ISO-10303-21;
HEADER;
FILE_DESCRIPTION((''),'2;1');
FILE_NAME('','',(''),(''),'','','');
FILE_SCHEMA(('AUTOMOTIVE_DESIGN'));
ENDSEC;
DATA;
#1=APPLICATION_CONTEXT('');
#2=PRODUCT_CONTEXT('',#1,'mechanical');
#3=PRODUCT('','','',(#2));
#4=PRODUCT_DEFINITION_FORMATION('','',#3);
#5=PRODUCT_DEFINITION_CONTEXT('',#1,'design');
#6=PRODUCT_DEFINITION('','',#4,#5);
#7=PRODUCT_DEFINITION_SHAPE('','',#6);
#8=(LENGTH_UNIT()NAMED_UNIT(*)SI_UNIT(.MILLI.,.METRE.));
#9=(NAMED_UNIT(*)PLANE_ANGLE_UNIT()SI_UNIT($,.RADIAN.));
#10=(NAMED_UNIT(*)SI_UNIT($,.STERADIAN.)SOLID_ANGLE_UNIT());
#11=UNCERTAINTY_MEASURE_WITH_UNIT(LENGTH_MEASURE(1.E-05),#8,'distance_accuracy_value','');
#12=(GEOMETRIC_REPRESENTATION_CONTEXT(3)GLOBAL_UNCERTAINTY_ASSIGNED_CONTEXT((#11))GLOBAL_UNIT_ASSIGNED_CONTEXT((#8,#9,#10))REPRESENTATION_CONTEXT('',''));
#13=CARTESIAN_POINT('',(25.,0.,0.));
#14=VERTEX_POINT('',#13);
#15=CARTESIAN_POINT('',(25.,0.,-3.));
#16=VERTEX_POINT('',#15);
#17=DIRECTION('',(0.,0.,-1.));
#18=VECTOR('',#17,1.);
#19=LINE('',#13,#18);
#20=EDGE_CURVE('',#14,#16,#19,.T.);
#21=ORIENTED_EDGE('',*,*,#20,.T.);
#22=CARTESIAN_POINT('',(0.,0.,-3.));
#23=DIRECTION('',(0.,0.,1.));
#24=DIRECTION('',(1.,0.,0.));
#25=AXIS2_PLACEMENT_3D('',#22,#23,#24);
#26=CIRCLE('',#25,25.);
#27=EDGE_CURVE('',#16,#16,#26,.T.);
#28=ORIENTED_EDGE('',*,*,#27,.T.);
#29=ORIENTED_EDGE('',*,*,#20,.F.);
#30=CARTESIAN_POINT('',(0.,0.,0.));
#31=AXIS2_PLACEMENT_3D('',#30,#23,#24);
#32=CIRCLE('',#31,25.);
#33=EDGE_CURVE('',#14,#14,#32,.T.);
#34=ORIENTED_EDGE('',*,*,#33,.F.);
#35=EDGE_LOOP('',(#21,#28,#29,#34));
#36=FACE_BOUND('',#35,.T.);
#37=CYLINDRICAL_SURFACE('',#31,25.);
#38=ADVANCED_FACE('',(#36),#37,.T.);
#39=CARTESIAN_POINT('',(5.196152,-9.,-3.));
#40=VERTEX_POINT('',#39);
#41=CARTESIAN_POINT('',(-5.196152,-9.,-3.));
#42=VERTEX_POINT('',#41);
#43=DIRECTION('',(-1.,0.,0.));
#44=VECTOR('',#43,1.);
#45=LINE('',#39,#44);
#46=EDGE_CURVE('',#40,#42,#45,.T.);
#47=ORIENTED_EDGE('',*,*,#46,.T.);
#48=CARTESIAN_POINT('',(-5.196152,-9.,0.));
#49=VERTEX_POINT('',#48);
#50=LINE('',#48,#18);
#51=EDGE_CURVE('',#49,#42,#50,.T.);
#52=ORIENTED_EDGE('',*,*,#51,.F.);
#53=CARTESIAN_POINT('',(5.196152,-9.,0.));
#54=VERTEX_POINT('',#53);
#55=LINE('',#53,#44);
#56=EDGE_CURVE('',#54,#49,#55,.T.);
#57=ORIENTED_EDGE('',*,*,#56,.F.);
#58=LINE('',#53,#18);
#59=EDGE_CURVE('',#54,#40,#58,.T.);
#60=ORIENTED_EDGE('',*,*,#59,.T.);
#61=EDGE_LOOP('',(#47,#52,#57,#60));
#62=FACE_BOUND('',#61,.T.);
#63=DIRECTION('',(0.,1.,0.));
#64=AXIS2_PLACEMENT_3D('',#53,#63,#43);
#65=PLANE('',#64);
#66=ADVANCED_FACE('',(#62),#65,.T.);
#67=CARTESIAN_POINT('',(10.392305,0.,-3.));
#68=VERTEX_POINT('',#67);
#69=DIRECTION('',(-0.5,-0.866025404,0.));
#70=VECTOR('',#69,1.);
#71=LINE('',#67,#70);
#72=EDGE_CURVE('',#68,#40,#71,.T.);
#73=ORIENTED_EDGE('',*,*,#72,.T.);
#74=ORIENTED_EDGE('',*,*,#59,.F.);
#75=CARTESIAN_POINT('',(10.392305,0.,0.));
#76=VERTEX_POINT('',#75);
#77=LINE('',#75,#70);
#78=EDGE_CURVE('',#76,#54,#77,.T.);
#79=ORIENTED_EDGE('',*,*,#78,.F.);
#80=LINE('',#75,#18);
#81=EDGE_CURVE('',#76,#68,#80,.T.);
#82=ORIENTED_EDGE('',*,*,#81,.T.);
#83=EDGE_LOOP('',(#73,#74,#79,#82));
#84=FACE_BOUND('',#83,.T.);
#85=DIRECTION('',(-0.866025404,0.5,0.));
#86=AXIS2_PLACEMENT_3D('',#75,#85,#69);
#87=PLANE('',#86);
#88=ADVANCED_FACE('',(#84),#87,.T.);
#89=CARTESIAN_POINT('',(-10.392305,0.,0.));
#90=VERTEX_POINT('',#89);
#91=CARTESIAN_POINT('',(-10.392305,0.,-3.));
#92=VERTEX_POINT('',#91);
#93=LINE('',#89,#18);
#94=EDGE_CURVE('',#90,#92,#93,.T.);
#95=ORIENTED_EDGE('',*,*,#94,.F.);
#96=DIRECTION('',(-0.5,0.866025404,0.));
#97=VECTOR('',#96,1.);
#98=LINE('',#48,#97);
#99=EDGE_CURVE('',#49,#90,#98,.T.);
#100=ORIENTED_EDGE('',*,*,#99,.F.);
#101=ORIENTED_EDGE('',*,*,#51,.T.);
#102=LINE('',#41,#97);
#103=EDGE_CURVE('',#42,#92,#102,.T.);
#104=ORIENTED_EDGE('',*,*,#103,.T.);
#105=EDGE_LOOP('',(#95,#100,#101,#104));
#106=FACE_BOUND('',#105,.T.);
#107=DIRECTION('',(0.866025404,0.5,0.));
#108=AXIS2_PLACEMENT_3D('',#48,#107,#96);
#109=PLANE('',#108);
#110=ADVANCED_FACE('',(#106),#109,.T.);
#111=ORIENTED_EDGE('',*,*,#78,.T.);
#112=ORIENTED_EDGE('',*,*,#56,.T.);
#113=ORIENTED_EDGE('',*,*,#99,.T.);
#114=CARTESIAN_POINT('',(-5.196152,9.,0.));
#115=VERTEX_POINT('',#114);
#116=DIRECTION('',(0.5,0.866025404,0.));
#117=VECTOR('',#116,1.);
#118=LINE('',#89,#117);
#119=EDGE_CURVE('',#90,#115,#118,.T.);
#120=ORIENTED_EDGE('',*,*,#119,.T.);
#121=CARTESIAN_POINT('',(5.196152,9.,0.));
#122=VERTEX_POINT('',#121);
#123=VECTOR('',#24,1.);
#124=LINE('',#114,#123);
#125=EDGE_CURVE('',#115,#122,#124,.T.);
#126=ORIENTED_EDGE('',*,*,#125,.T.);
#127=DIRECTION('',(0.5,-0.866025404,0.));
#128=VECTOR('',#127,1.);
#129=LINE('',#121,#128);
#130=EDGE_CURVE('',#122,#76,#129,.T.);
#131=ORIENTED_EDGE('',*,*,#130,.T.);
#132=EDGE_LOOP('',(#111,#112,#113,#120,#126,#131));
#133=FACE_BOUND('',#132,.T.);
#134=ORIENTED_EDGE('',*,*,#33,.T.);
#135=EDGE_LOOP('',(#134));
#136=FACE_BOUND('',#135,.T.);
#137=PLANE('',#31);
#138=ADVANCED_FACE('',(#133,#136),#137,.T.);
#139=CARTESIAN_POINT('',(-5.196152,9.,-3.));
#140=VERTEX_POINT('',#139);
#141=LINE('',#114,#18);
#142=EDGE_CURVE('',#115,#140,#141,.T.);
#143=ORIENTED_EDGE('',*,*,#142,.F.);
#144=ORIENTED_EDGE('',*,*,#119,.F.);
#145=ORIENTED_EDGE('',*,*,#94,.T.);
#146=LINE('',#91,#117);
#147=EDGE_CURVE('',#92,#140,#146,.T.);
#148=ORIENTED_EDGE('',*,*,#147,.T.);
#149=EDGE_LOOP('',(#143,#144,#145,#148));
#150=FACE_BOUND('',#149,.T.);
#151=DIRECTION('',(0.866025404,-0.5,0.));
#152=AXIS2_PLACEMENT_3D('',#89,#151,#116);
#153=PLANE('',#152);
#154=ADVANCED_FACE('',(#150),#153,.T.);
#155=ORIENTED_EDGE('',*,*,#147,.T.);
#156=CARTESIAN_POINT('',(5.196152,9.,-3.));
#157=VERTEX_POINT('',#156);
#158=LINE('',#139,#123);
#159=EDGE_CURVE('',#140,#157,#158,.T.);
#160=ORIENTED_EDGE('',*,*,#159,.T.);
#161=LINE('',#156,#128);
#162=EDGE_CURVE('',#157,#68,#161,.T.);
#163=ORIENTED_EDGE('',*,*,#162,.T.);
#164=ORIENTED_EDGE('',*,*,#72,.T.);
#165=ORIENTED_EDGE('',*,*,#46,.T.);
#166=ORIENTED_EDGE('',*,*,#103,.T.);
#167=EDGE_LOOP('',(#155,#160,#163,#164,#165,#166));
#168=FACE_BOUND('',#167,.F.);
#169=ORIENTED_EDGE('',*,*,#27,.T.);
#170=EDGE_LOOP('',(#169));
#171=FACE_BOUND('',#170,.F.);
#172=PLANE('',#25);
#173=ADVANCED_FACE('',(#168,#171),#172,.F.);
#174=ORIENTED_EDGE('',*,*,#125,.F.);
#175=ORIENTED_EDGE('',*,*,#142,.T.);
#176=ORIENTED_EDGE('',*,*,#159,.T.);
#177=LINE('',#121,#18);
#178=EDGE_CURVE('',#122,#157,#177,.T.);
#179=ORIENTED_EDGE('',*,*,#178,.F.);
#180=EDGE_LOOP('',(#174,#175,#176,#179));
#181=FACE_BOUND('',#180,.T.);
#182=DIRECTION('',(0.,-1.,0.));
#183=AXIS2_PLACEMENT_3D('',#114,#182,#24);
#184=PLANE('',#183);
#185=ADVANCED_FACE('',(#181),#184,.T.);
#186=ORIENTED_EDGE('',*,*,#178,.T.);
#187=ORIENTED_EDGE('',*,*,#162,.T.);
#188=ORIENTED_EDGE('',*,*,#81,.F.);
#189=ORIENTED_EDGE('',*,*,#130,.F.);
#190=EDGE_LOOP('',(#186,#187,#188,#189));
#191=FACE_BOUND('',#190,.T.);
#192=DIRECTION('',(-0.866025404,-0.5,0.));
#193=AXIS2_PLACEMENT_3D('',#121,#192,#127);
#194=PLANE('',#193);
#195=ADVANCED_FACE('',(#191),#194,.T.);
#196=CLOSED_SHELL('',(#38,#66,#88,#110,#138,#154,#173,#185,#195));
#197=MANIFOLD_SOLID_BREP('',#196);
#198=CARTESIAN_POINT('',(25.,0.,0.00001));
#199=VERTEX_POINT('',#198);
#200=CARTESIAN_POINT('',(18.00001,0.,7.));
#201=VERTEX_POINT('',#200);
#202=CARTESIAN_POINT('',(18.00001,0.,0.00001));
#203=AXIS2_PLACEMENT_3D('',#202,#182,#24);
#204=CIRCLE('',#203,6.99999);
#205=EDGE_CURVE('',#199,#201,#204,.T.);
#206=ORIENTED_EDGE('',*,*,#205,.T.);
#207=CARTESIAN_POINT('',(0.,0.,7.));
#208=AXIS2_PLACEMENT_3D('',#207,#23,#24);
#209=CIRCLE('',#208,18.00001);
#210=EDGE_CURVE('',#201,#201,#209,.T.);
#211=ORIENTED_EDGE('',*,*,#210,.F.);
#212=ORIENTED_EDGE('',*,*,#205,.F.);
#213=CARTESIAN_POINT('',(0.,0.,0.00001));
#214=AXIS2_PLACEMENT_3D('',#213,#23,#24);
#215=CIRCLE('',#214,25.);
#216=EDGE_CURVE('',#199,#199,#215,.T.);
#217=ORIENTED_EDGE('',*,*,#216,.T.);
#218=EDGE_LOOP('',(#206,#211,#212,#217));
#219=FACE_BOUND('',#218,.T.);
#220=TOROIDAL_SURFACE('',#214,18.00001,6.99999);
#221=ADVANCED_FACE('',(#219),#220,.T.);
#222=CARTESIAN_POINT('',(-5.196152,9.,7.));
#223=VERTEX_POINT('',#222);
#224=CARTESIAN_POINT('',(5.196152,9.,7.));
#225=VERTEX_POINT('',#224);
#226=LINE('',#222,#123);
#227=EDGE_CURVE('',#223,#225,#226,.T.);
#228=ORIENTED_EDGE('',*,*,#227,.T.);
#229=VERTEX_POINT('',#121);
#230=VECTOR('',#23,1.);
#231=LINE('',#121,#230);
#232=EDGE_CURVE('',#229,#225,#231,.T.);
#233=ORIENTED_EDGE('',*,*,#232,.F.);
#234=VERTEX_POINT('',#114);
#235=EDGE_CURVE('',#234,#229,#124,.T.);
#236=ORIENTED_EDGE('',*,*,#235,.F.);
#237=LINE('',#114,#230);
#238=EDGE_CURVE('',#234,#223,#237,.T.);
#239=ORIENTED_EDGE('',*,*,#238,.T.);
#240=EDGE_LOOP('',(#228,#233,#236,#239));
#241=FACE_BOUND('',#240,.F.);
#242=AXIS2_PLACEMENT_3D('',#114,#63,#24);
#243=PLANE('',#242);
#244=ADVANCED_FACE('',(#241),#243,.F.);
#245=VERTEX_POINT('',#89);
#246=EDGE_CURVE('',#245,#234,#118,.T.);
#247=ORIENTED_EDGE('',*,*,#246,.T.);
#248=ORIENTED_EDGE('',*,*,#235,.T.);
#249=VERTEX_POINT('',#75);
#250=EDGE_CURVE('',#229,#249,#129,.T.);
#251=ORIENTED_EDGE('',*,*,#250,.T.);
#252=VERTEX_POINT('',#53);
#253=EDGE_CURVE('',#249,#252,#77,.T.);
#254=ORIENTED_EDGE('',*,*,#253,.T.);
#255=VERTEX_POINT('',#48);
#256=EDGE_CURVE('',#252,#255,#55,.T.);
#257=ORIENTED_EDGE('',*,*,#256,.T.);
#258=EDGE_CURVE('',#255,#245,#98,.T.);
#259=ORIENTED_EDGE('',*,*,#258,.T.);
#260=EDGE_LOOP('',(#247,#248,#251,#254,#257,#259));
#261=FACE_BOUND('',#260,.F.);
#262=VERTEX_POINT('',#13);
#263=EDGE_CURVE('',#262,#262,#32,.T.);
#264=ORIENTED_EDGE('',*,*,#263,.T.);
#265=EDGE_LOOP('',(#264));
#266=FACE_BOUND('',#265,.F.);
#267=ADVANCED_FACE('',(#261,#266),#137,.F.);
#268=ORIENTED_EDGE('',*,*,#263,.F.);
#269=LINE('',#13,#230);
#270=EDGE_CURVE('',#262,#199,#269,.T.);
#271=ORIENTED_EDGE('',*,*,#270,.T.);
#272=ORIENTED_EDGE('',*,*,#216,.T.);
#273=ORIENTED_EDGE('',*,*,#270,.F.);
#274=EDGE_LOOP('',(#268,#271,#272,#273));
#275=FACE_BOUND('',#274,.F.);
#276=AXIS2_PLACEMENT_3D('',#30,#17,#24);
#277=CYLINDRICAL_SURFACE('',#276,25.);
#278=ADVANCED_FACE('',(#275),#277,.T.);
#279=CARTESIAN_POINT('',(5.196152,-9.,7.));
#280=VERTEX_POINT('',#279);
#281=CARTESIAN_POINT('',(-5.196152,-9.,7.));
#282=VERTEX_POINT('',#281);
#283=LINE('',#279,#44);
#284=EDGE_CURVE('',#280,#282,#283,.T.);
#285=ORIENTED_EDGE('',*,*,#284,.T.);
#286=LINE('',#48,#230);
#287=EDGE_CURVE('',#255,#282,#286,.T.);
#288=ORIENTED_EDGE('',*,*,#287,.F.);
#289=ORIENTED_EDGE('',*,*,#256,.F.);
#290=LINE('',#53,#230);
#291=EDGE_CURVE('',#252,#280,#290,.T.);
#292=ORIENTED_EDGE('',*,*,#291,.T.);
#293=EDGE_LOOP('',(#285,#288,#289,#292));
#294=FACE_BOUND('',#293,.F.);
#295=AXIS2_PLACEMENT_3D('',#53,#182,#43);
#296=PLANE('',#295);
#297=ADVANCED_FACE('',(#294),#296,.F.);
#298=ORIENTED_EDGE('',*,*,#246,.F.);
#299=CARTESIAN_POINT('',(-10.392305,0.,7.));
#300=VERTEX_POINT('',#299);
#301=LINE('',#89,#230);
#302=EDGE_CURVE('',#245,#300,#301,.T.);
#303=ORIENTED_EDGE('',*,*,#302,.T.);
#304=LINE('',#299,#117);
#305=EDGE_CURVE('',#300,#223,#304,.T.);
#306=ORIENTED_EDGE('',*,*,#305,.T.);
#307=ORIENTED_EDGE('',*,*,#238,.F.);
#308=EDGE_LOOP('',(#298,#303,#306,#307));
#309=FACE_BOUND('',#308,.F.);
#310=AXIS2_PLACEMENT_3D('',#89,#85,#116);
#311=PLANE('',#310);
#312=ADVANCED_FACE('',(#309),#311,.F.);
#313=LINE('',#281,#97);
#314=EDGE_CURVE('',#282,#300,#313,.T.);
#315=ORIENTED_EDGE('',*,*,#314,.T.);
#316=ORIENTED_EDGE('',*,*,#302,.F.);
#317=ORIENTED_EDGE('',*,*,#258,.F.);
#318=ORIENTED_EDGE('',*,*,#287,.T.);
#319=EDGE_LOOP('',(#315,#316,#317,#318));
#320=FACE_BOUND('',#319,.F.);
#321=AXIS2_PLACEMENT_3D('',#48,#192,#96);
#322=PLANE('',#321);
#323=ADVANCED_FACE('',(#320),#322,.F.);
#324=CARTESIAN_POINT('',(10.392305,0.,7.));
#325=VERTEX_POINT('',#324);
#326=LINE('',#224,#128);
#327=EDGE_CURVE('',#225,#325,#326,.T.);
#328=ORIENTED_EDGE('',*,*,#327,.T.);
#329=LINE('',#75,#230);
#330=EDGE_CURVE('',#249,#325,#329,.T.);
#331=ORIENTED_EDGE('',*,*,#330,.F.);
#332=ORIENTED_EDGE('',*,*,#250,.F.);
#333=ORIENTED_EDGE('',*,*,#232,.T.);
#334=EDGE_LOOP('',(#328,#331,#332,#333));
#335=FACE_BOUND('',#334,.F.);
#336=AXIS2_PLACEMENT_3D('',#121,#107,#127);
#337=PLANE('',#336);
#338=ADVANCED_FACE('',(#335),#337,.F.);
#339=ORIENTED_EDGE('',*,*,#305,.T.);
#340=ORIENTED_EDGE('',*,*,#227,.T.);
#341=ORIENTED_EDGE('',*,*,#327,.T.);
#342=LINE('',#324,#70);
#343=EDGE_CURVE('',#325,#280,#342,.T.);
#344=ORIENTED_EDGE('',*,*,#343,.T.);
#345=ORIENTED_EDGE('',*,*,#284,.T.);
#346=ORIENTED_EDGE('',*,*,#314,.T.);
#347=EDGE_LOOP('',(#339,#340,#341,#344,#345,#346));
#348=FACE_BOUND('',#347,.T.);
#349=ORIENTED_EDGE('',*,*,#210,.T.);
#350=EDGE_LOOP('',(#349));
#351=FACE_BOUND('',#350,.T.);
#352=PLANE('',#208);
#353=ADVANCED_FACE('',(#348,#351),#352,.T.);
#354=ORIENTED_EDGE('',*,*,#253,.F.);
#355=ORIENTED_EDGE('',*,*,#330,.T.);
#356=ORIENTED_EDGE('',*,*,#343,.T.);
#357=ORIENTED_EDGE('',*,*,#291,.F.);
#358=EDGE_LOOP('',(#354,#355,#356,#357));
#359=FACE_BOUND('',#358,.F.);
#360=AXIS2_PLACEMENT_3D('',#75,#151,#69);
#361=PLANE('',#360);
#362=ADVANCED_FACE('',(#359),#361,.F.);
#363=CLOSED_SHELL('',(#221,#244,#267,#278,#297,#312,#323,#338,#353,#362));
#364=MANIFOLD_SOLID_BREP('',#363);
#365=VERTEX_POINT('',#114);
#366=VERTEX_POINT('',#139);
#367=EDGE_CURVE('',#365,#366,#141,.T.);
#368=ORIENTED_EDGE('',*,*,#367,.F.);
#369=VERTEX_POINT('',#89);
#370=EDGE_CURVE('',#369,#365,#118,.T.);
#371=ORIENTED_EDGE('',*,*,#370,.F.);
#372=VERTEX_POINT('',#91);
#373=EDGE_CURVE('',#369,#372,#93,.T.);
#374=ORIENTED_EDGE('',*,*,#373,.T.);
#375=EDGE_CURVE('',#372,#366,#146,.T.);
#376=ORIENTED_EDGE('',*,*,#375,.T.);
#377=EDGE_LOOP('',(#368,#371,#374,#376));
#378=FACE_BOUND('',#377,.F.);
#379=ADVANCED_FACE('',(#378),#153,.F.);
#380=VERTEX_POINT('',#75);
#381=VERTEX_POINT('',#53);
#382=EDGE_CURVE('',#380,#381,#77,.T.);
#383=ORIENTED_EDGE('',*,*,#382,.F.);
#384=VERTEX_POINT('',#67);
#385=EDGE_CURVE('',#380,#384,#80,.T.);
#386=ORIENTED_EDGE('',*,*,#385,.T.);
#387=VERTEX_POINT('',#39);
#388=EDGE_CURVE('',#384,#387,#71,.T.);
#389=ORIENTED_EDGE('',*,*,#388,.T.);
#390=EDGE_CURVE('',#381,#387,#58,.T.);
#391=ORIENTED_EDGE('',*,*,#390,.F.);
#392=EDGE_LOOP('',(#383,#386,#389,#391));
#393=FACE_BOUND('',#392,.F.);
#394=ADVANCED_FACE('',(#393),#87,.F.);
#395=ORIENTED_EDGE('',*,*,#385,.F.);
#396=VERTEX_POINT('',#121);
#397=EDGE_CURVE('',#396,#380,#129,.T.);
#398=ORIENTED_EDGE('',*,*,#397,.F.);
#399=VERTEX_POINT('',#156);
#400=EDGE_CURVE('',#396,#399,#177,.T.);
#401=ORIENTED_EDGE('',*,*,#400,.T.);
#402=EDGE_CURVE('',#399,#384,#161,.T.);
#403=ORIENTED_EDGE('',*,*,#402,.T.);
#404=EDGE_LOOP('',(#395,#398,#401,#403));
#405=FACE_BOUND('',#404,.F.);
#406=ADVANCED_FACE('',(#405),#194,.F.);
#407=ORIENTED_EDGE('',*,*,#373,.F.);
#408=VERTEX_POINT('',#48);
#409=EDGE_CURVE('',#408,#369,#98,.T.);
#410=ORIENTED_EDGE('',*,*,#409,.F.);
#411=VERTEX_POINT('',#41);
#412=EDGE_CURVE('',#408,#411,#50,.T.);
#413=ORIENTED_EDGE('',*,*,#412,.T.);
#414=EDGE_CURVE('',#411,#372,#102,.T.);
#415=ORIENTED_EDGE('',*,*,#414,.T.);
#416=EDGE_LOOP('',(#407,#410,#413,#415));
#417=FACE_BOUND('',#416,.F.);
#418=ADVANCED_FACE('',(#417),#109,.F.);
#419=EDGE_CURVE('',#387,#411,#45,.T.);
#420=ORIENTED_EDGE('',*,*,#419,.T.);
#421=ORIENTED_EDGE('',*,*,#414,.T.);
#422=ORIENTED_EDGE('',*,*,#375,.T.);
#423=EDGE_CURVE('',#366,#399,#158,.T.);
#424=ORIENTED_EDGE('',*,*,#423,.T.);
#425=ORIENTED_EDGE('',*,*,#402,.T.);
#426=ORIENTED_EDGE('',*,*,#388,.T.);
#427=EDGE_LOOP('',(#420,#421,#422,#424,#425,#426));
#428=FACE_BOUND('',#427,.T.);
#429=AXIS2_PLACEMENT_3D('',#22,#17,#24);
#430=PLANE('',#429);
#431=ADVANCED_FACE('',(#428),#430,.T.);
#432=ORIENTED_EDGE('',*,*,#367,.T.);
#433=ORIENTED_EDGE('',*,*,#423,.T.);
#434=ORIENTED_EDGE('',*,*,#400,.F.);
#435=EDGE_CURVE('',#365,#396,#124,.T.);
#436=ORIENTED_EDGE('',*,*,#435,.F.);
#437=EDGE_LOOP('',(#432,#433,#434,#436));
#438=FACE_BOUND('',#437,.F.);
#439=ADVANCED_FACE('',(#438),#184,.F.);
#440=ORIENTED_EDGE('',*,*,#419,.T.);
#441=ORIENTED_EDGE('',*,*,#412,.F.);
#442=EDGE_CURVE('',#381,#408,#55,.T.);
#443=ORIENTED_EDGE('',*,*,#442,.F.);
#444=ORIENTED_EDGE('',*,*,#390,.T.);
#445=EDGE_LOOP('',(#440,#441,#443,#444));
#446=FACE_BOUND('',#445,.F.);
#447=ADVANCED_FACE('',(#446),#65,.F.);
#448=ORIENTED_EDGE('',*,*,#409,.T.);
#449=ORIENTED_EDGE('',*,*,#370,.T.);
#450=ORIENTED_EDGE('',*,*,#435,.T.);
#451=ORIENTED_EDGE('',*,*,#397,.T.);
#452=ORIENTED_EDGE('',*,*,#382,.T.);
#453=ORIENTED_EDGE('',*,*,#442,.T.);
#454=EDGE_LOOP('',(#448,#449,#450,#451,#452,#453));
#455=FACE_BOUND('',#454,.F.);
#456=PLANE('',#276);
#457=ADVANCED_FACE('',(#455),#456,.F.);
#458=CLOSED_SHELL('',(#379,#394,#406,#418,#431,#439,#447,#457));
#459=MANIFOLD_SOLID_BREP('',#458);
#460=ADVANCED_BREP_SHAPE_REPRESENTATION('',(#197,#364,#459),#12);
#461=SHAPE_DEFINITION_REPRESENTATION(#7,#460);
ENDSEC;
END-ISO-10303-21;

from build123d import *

# Parameters (mm, degrees)
F0_R     = 25
F1_DEPTH = 7
F3_DEPTH = 3
F4_DEPTH = 3
F5_R     = 6.99999


# Not quite as in the source:
# - a fillet or chamfer is up to 0.001 mm smaller than in the source, because OpenCascade refuses the exact size


with BuildPart() as f1:
    # F0 (on Top) → F1 (new body)
    with BuildSketch(Plane.XY):
        Circle(F0_R)
        Polygon((-10.3923048454, 0), (-5.1961524227, 9), (0, 9), (5.1961524227, 9), (10.3923048454, 0), (5.1961524227, -9), (-5.1961524227, -9), align=None, mode=Mode.SUBTRACT)
    extrude(amount=F1_DEPTH)


with BuildPart() as f3:
    # F2 (on face) → F3 (new body)
    with BuildSketch(Plane(origin=(0, 0, 0), x_dir=(1, 0, 0), z_dir=(0, 0, -1))):
        Polygon((5.1961524227, 9), (-5.1961524227, 9), (-10.3923048454, 0), (-5.1961524227, -9), (5.1961524227, -9), (10.3923048454, 0), align=None)
    extrude(amount=F3_DEPTH)


with BuildPart() as f4:
    # F4 (new): a face of the model
    f4_faces = [f1.part.faces().sort_by_distance(p)[0] for p in [
        (-24.2928932188, 0, 0),
    ]]
    extrude(f4_faces, amount=F4_DEPTH)


with BuildPart() as f1_1:
    add(f1.part)

    # F5 (radius 7 in the source; OpenCascade refuses exactly that, so slightly less here)
    f5_edges = [f1_1.edges().sort_by_distance(p)[0] for p in [
        (-25, 0, 7),
    ]]
    fillet(f5_edges, radius=F5_R)


solid = Compound([f3.part, f4.part, f1_1.part])
